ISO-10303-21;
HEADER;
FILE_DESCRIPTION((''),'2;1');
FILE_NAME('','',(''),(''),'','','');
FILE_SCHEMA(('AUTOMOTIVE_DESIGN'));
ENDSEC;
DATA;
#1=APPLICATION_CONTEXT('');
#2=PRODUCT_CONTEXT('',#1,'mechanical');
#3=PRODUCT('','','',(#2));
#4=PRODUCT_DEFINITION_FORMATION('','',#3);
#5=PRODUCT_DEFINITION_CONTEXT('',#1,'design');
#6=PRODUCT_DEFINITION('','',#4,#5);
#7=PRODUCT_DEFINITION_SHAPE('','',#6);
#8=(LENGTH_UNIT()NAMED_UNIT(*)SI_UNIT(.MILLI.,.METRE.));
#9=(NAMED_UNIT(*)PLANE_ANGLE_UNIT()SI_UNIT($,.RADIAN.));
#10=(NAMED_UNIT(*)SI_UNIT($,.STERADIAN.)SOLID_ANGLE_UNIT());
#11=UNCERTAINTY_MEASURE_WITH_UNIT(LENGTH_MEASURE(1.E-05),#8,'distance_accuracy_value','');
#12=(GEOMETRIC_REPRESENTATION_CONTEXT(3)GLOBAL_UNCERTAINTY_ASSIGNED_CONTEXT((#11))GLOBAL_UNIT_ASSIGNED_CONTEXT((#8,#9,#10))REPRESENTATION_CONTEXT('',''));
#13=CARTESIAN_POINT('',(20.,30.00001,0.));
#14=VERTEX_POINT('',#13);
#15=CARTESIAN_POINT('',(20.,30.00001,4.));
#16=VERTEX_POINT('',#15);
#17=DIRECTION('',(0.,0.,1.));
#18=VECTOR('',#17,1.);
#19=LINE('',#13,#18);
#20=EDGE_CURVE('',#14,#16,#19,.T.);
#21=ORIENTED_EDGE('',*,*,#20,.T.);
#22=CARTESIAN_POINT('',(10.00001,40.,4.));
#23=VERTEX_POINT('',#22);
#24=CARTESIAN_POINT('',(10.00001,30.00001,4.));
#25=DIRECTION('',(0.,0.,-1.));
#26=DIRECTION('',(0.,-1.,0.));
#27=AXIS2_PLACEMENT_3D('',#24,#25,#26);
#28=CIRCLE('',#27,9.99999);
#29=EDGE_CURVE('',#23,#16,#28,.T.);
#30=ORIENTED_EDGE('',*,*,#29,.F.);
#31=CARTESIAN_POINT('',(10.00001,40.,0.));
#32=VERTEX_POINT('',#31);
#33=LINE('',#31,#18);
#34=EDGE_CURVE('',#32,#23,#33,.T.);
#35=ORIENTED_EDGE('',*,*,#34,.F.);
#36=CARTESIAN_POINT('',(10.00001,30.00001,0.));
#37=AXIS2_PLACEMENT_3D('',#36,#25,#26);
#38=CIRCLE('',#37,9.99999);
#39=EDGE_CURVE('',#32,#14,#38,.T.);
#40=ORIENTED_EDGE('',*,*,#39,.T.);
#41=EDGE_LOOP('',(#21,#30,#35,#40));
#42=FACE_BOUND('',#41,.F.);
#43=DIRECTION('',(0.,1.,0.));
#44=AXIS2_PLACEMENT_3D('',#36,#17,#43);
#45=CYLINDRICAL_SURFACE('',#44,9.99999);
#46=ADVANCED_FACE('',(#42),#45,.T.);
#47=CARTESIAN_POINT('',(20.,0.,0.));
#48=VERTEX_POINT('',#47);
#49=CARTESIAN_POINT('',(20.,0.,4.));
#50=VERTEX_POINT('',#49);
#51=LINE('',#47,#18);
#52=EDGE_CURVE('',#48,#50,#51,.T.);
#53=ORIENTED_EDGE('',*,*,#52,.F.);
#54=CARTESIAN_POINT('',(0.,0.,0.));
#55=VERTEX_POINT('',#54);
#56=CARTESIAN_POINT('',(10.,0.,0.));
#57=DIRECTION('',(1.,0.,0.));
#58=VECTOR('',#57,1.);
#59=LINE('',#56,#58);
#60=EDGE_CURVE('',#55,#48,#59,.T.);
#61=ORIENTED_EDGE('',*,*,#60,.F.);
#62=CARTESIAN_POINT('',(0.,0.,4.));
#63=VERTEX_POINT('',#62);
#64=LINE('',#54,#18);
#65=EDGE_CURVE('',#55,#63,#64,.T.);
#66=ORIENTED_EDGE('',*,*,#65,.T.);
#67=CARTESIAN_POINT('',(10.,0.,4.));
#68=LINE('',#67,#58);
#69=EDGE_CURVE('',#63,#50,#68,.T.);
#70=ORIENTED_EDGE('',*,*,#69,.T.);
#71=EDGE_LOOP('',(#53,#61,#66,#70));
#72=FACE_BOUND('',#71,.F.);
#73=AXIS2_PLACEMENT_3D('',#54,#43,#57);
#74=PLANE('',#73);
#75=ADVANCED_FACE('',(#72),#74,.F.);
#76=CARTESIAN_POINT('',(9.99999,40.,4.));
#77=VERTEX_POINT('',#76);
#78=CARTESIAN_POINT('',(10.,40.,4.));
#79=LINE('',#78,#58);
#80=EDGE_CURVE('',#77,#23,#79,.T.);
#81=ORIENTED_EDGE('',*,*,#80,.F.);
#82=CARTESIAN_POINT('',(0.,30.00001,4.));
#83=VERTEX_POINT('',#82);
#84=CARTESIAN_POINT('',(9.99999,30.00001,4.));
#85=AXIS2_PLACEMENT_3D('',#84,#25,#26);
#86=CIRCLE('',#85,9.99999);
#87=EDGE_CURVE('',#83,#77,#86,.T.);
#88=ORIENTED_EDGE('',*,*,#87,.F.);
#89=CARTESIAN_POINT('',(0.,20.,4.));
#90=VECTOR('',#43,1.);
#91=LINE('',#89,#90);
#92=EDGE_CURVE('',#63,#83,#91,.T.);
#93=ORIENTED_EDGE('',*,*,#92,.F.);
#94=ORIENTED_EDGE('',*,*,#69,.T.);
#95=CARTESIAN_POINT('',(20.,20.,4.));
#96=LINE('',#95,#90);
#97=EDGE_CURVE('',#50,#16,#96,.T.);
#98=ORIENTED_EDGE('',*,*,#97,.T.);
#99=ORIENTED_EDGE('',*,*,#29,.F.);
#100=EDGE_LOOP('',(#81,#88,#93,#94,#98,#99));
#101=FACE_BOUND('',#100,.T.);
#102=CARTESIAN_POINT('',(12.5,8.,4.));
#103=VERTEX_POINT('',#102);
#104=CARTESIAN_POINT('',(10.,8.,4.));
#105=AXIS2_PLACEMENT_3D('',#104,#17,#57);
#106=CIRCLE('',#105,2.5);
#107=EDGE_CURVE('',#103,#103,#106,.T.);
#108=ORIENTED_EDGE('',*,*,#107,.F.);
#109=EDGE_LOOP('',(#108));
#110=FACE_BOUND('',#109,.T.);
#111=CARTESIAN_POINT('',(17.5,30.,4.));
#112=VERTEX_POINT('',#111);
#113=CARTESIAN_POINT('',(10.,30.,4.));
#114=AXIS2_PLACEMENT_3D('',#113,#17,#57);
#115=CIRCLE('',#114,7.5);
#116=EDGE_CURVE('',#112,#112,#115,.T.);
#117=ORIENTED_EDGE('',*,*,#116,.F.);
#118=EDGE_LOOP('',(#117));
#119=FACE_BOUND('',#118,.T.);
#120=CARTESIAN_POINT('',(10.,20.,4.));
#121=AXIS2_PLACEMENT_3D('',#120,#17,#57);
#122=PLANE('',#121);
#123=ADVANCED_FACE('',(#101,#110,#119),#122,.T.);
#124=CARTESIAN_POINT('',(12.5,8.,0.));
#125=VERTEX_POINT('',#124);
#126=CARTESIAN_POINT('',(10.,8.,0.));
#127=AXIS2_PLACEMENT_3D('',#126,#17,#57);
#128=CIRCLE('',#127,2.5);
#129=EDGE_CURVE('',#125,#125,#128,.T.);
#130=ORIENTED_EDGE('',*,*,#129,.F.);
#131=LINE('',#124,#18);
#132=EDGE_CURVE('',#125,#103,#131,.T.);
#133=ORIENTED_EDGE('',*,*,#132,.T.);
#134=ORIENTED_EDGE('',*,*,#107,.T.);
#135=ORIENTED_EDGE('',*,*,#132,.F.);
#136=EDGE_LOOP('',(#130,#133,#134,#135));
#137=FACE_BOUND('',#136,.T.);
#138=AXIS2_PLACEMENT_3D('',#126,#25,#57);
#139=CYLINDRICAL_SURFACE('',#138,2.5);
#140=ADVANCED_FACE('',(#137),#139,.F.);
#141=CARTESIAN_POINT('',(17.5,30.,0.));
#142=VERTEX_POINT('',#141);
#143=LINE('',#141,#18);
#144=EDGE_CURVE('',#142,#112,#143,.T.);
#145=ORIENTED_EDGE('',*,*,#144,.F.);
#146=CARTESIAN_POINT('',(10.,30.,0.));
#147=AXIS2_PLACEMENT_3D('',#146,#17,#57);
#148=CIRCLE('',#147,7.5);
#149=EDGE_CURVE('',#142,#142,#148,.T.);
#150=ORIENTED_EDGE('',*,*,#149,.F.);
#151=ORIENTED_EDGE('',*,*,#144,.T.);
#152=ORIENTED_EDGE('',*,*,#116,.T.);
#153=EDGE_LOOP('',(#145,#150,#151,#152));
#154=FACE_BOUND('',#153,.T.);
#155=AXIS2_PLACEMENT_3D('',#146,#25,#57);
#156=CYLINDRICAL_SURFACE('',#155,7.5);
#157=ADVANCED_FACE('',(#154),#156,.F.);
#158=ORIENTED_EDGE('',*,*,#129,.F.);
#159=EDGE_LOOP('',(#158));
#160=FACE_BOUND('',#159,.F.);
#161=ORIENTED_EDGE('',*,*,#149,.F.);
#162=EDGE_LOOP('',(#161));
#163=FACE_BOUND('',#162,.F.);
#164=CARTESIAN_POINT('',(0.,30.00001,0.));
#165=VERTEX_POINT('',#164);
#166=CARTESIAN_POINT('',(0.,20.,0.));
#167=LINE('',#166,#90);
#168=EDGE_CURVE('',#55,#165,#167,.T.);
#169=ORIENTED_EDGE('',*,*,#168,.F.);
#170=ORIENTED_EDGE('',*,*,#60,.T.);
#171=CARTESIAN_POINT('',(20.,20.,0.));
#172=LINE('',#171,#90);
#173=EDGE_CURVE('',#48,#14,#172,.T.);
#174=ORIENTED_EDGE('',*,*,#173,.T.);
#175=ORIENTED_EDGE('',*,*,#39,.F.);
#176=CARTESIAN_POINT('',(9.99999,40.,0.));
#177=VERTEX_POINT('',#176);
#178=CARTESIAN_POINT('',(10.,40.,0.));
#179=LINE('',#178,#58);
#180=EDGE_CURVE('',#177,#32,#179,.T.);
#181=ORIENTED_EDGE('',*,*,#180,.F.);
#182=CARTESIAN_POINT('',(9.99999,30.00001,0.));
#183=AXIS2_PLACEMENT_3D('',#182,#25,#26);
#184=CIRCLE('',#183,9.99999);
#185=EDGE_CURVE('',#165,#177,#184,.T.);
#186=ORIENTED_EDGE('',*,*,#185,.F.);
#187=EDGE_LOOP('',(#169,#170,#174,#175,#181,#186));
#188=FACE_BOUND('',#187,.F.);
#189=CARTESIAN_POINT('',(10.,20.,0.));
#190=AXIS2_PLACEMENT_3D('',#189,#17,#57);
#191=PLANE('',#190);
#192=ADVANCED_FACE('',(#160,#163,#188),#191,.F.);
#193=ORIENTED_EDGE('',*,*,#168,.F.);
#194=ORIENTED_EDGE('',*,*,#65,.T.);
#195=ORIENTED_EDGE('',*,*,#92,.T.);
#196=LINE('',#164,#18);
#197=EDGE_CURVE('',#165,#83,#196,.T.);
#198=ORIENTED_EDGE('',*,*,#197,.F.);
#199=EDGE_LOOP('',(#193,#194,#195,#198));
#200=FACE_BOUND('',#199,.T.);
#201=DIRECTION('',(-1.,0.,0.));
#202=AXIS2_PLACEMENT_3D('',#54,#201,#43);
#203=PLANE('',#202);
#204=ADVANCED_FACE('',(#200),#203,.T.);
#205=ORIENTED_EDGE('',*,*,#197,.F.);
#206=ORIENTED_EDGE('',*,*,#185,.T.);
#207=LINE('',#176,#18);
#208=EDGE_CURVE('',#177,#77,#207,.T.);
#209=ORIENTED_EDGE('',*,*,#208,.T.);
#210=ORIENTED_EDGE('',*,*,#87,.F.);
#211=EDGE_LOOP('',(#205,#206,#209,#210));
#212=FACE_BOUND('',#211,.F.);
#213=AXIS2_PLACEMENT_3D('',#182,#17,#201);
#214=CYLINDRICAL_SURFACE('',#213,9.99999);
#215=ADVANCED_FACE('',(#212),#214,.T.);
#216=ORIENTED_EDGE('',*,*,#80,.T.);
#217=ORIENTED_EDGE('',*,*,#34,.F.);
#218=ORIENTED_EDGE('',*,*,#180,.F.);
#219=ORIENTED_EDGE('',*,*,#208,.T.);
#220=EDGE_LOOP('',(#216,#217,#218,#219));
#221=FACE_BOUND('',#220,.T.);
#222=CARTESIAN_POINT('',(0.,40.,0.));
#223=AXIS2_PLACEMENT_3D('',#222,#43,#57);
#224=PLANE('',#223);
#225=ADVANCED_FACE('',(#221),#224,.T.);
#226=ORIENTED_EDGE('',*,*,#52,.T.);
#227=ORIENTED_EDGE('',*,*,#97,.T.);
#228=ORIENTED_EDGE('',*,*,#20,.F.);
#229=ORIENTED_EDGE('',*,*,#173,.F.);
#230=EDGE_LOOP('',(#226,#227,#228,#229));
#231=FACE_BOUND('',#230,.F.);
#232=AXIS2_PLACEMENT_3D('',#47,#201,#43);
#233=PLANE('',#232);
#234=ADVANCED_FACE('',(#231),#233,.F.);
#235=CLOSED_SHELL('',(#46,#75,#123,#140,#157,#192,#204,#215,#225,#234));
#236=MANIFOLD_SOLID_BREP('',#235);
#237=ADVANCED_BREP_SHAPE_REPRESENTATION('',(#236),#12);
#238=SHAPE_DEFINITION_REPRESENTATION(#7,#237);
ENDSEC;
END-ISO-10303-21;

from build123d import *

# Parameters (mm, degrees)
F0_W     = 20
F0_H     = 40
F0_R     = 2.5
F0_R_2   = 7.5
F1_DEPTH = 4
F2_R     = 9.99999


# Not quite as in the source:
# - a fillet or chamfer is up to 0.001 mm smaller than in the source, because OpenCascade refuses the exact size


with BuildPart() as f1:
    # F0 (on Top) → F1 (new body)
    with BuildSketch(Plane.XY):
        with Locations((10, 20)):
            Rectangle(F0_W, F0_H)
        with Locations((10, 8)):
            Circle(F0_R, mode=Mode.SUBTRACT)
        with Locations((10, 30)):
            Circle(F0_R_2, mode=Mode.SUBTRACT)
    extrude(amount=F1_DEPTH)

    # F2 (radius 10 in the source; OpenCascade refuses exactly that, so slightly less here)
    f2_edges = [f1.edges().sort_by_distance(p)[0] for p in [
        (20, 40, 2),
        (0, 40, 2),
    ]]
    fillet(f2_edges, radius=F2_R)


solid = f1.part
